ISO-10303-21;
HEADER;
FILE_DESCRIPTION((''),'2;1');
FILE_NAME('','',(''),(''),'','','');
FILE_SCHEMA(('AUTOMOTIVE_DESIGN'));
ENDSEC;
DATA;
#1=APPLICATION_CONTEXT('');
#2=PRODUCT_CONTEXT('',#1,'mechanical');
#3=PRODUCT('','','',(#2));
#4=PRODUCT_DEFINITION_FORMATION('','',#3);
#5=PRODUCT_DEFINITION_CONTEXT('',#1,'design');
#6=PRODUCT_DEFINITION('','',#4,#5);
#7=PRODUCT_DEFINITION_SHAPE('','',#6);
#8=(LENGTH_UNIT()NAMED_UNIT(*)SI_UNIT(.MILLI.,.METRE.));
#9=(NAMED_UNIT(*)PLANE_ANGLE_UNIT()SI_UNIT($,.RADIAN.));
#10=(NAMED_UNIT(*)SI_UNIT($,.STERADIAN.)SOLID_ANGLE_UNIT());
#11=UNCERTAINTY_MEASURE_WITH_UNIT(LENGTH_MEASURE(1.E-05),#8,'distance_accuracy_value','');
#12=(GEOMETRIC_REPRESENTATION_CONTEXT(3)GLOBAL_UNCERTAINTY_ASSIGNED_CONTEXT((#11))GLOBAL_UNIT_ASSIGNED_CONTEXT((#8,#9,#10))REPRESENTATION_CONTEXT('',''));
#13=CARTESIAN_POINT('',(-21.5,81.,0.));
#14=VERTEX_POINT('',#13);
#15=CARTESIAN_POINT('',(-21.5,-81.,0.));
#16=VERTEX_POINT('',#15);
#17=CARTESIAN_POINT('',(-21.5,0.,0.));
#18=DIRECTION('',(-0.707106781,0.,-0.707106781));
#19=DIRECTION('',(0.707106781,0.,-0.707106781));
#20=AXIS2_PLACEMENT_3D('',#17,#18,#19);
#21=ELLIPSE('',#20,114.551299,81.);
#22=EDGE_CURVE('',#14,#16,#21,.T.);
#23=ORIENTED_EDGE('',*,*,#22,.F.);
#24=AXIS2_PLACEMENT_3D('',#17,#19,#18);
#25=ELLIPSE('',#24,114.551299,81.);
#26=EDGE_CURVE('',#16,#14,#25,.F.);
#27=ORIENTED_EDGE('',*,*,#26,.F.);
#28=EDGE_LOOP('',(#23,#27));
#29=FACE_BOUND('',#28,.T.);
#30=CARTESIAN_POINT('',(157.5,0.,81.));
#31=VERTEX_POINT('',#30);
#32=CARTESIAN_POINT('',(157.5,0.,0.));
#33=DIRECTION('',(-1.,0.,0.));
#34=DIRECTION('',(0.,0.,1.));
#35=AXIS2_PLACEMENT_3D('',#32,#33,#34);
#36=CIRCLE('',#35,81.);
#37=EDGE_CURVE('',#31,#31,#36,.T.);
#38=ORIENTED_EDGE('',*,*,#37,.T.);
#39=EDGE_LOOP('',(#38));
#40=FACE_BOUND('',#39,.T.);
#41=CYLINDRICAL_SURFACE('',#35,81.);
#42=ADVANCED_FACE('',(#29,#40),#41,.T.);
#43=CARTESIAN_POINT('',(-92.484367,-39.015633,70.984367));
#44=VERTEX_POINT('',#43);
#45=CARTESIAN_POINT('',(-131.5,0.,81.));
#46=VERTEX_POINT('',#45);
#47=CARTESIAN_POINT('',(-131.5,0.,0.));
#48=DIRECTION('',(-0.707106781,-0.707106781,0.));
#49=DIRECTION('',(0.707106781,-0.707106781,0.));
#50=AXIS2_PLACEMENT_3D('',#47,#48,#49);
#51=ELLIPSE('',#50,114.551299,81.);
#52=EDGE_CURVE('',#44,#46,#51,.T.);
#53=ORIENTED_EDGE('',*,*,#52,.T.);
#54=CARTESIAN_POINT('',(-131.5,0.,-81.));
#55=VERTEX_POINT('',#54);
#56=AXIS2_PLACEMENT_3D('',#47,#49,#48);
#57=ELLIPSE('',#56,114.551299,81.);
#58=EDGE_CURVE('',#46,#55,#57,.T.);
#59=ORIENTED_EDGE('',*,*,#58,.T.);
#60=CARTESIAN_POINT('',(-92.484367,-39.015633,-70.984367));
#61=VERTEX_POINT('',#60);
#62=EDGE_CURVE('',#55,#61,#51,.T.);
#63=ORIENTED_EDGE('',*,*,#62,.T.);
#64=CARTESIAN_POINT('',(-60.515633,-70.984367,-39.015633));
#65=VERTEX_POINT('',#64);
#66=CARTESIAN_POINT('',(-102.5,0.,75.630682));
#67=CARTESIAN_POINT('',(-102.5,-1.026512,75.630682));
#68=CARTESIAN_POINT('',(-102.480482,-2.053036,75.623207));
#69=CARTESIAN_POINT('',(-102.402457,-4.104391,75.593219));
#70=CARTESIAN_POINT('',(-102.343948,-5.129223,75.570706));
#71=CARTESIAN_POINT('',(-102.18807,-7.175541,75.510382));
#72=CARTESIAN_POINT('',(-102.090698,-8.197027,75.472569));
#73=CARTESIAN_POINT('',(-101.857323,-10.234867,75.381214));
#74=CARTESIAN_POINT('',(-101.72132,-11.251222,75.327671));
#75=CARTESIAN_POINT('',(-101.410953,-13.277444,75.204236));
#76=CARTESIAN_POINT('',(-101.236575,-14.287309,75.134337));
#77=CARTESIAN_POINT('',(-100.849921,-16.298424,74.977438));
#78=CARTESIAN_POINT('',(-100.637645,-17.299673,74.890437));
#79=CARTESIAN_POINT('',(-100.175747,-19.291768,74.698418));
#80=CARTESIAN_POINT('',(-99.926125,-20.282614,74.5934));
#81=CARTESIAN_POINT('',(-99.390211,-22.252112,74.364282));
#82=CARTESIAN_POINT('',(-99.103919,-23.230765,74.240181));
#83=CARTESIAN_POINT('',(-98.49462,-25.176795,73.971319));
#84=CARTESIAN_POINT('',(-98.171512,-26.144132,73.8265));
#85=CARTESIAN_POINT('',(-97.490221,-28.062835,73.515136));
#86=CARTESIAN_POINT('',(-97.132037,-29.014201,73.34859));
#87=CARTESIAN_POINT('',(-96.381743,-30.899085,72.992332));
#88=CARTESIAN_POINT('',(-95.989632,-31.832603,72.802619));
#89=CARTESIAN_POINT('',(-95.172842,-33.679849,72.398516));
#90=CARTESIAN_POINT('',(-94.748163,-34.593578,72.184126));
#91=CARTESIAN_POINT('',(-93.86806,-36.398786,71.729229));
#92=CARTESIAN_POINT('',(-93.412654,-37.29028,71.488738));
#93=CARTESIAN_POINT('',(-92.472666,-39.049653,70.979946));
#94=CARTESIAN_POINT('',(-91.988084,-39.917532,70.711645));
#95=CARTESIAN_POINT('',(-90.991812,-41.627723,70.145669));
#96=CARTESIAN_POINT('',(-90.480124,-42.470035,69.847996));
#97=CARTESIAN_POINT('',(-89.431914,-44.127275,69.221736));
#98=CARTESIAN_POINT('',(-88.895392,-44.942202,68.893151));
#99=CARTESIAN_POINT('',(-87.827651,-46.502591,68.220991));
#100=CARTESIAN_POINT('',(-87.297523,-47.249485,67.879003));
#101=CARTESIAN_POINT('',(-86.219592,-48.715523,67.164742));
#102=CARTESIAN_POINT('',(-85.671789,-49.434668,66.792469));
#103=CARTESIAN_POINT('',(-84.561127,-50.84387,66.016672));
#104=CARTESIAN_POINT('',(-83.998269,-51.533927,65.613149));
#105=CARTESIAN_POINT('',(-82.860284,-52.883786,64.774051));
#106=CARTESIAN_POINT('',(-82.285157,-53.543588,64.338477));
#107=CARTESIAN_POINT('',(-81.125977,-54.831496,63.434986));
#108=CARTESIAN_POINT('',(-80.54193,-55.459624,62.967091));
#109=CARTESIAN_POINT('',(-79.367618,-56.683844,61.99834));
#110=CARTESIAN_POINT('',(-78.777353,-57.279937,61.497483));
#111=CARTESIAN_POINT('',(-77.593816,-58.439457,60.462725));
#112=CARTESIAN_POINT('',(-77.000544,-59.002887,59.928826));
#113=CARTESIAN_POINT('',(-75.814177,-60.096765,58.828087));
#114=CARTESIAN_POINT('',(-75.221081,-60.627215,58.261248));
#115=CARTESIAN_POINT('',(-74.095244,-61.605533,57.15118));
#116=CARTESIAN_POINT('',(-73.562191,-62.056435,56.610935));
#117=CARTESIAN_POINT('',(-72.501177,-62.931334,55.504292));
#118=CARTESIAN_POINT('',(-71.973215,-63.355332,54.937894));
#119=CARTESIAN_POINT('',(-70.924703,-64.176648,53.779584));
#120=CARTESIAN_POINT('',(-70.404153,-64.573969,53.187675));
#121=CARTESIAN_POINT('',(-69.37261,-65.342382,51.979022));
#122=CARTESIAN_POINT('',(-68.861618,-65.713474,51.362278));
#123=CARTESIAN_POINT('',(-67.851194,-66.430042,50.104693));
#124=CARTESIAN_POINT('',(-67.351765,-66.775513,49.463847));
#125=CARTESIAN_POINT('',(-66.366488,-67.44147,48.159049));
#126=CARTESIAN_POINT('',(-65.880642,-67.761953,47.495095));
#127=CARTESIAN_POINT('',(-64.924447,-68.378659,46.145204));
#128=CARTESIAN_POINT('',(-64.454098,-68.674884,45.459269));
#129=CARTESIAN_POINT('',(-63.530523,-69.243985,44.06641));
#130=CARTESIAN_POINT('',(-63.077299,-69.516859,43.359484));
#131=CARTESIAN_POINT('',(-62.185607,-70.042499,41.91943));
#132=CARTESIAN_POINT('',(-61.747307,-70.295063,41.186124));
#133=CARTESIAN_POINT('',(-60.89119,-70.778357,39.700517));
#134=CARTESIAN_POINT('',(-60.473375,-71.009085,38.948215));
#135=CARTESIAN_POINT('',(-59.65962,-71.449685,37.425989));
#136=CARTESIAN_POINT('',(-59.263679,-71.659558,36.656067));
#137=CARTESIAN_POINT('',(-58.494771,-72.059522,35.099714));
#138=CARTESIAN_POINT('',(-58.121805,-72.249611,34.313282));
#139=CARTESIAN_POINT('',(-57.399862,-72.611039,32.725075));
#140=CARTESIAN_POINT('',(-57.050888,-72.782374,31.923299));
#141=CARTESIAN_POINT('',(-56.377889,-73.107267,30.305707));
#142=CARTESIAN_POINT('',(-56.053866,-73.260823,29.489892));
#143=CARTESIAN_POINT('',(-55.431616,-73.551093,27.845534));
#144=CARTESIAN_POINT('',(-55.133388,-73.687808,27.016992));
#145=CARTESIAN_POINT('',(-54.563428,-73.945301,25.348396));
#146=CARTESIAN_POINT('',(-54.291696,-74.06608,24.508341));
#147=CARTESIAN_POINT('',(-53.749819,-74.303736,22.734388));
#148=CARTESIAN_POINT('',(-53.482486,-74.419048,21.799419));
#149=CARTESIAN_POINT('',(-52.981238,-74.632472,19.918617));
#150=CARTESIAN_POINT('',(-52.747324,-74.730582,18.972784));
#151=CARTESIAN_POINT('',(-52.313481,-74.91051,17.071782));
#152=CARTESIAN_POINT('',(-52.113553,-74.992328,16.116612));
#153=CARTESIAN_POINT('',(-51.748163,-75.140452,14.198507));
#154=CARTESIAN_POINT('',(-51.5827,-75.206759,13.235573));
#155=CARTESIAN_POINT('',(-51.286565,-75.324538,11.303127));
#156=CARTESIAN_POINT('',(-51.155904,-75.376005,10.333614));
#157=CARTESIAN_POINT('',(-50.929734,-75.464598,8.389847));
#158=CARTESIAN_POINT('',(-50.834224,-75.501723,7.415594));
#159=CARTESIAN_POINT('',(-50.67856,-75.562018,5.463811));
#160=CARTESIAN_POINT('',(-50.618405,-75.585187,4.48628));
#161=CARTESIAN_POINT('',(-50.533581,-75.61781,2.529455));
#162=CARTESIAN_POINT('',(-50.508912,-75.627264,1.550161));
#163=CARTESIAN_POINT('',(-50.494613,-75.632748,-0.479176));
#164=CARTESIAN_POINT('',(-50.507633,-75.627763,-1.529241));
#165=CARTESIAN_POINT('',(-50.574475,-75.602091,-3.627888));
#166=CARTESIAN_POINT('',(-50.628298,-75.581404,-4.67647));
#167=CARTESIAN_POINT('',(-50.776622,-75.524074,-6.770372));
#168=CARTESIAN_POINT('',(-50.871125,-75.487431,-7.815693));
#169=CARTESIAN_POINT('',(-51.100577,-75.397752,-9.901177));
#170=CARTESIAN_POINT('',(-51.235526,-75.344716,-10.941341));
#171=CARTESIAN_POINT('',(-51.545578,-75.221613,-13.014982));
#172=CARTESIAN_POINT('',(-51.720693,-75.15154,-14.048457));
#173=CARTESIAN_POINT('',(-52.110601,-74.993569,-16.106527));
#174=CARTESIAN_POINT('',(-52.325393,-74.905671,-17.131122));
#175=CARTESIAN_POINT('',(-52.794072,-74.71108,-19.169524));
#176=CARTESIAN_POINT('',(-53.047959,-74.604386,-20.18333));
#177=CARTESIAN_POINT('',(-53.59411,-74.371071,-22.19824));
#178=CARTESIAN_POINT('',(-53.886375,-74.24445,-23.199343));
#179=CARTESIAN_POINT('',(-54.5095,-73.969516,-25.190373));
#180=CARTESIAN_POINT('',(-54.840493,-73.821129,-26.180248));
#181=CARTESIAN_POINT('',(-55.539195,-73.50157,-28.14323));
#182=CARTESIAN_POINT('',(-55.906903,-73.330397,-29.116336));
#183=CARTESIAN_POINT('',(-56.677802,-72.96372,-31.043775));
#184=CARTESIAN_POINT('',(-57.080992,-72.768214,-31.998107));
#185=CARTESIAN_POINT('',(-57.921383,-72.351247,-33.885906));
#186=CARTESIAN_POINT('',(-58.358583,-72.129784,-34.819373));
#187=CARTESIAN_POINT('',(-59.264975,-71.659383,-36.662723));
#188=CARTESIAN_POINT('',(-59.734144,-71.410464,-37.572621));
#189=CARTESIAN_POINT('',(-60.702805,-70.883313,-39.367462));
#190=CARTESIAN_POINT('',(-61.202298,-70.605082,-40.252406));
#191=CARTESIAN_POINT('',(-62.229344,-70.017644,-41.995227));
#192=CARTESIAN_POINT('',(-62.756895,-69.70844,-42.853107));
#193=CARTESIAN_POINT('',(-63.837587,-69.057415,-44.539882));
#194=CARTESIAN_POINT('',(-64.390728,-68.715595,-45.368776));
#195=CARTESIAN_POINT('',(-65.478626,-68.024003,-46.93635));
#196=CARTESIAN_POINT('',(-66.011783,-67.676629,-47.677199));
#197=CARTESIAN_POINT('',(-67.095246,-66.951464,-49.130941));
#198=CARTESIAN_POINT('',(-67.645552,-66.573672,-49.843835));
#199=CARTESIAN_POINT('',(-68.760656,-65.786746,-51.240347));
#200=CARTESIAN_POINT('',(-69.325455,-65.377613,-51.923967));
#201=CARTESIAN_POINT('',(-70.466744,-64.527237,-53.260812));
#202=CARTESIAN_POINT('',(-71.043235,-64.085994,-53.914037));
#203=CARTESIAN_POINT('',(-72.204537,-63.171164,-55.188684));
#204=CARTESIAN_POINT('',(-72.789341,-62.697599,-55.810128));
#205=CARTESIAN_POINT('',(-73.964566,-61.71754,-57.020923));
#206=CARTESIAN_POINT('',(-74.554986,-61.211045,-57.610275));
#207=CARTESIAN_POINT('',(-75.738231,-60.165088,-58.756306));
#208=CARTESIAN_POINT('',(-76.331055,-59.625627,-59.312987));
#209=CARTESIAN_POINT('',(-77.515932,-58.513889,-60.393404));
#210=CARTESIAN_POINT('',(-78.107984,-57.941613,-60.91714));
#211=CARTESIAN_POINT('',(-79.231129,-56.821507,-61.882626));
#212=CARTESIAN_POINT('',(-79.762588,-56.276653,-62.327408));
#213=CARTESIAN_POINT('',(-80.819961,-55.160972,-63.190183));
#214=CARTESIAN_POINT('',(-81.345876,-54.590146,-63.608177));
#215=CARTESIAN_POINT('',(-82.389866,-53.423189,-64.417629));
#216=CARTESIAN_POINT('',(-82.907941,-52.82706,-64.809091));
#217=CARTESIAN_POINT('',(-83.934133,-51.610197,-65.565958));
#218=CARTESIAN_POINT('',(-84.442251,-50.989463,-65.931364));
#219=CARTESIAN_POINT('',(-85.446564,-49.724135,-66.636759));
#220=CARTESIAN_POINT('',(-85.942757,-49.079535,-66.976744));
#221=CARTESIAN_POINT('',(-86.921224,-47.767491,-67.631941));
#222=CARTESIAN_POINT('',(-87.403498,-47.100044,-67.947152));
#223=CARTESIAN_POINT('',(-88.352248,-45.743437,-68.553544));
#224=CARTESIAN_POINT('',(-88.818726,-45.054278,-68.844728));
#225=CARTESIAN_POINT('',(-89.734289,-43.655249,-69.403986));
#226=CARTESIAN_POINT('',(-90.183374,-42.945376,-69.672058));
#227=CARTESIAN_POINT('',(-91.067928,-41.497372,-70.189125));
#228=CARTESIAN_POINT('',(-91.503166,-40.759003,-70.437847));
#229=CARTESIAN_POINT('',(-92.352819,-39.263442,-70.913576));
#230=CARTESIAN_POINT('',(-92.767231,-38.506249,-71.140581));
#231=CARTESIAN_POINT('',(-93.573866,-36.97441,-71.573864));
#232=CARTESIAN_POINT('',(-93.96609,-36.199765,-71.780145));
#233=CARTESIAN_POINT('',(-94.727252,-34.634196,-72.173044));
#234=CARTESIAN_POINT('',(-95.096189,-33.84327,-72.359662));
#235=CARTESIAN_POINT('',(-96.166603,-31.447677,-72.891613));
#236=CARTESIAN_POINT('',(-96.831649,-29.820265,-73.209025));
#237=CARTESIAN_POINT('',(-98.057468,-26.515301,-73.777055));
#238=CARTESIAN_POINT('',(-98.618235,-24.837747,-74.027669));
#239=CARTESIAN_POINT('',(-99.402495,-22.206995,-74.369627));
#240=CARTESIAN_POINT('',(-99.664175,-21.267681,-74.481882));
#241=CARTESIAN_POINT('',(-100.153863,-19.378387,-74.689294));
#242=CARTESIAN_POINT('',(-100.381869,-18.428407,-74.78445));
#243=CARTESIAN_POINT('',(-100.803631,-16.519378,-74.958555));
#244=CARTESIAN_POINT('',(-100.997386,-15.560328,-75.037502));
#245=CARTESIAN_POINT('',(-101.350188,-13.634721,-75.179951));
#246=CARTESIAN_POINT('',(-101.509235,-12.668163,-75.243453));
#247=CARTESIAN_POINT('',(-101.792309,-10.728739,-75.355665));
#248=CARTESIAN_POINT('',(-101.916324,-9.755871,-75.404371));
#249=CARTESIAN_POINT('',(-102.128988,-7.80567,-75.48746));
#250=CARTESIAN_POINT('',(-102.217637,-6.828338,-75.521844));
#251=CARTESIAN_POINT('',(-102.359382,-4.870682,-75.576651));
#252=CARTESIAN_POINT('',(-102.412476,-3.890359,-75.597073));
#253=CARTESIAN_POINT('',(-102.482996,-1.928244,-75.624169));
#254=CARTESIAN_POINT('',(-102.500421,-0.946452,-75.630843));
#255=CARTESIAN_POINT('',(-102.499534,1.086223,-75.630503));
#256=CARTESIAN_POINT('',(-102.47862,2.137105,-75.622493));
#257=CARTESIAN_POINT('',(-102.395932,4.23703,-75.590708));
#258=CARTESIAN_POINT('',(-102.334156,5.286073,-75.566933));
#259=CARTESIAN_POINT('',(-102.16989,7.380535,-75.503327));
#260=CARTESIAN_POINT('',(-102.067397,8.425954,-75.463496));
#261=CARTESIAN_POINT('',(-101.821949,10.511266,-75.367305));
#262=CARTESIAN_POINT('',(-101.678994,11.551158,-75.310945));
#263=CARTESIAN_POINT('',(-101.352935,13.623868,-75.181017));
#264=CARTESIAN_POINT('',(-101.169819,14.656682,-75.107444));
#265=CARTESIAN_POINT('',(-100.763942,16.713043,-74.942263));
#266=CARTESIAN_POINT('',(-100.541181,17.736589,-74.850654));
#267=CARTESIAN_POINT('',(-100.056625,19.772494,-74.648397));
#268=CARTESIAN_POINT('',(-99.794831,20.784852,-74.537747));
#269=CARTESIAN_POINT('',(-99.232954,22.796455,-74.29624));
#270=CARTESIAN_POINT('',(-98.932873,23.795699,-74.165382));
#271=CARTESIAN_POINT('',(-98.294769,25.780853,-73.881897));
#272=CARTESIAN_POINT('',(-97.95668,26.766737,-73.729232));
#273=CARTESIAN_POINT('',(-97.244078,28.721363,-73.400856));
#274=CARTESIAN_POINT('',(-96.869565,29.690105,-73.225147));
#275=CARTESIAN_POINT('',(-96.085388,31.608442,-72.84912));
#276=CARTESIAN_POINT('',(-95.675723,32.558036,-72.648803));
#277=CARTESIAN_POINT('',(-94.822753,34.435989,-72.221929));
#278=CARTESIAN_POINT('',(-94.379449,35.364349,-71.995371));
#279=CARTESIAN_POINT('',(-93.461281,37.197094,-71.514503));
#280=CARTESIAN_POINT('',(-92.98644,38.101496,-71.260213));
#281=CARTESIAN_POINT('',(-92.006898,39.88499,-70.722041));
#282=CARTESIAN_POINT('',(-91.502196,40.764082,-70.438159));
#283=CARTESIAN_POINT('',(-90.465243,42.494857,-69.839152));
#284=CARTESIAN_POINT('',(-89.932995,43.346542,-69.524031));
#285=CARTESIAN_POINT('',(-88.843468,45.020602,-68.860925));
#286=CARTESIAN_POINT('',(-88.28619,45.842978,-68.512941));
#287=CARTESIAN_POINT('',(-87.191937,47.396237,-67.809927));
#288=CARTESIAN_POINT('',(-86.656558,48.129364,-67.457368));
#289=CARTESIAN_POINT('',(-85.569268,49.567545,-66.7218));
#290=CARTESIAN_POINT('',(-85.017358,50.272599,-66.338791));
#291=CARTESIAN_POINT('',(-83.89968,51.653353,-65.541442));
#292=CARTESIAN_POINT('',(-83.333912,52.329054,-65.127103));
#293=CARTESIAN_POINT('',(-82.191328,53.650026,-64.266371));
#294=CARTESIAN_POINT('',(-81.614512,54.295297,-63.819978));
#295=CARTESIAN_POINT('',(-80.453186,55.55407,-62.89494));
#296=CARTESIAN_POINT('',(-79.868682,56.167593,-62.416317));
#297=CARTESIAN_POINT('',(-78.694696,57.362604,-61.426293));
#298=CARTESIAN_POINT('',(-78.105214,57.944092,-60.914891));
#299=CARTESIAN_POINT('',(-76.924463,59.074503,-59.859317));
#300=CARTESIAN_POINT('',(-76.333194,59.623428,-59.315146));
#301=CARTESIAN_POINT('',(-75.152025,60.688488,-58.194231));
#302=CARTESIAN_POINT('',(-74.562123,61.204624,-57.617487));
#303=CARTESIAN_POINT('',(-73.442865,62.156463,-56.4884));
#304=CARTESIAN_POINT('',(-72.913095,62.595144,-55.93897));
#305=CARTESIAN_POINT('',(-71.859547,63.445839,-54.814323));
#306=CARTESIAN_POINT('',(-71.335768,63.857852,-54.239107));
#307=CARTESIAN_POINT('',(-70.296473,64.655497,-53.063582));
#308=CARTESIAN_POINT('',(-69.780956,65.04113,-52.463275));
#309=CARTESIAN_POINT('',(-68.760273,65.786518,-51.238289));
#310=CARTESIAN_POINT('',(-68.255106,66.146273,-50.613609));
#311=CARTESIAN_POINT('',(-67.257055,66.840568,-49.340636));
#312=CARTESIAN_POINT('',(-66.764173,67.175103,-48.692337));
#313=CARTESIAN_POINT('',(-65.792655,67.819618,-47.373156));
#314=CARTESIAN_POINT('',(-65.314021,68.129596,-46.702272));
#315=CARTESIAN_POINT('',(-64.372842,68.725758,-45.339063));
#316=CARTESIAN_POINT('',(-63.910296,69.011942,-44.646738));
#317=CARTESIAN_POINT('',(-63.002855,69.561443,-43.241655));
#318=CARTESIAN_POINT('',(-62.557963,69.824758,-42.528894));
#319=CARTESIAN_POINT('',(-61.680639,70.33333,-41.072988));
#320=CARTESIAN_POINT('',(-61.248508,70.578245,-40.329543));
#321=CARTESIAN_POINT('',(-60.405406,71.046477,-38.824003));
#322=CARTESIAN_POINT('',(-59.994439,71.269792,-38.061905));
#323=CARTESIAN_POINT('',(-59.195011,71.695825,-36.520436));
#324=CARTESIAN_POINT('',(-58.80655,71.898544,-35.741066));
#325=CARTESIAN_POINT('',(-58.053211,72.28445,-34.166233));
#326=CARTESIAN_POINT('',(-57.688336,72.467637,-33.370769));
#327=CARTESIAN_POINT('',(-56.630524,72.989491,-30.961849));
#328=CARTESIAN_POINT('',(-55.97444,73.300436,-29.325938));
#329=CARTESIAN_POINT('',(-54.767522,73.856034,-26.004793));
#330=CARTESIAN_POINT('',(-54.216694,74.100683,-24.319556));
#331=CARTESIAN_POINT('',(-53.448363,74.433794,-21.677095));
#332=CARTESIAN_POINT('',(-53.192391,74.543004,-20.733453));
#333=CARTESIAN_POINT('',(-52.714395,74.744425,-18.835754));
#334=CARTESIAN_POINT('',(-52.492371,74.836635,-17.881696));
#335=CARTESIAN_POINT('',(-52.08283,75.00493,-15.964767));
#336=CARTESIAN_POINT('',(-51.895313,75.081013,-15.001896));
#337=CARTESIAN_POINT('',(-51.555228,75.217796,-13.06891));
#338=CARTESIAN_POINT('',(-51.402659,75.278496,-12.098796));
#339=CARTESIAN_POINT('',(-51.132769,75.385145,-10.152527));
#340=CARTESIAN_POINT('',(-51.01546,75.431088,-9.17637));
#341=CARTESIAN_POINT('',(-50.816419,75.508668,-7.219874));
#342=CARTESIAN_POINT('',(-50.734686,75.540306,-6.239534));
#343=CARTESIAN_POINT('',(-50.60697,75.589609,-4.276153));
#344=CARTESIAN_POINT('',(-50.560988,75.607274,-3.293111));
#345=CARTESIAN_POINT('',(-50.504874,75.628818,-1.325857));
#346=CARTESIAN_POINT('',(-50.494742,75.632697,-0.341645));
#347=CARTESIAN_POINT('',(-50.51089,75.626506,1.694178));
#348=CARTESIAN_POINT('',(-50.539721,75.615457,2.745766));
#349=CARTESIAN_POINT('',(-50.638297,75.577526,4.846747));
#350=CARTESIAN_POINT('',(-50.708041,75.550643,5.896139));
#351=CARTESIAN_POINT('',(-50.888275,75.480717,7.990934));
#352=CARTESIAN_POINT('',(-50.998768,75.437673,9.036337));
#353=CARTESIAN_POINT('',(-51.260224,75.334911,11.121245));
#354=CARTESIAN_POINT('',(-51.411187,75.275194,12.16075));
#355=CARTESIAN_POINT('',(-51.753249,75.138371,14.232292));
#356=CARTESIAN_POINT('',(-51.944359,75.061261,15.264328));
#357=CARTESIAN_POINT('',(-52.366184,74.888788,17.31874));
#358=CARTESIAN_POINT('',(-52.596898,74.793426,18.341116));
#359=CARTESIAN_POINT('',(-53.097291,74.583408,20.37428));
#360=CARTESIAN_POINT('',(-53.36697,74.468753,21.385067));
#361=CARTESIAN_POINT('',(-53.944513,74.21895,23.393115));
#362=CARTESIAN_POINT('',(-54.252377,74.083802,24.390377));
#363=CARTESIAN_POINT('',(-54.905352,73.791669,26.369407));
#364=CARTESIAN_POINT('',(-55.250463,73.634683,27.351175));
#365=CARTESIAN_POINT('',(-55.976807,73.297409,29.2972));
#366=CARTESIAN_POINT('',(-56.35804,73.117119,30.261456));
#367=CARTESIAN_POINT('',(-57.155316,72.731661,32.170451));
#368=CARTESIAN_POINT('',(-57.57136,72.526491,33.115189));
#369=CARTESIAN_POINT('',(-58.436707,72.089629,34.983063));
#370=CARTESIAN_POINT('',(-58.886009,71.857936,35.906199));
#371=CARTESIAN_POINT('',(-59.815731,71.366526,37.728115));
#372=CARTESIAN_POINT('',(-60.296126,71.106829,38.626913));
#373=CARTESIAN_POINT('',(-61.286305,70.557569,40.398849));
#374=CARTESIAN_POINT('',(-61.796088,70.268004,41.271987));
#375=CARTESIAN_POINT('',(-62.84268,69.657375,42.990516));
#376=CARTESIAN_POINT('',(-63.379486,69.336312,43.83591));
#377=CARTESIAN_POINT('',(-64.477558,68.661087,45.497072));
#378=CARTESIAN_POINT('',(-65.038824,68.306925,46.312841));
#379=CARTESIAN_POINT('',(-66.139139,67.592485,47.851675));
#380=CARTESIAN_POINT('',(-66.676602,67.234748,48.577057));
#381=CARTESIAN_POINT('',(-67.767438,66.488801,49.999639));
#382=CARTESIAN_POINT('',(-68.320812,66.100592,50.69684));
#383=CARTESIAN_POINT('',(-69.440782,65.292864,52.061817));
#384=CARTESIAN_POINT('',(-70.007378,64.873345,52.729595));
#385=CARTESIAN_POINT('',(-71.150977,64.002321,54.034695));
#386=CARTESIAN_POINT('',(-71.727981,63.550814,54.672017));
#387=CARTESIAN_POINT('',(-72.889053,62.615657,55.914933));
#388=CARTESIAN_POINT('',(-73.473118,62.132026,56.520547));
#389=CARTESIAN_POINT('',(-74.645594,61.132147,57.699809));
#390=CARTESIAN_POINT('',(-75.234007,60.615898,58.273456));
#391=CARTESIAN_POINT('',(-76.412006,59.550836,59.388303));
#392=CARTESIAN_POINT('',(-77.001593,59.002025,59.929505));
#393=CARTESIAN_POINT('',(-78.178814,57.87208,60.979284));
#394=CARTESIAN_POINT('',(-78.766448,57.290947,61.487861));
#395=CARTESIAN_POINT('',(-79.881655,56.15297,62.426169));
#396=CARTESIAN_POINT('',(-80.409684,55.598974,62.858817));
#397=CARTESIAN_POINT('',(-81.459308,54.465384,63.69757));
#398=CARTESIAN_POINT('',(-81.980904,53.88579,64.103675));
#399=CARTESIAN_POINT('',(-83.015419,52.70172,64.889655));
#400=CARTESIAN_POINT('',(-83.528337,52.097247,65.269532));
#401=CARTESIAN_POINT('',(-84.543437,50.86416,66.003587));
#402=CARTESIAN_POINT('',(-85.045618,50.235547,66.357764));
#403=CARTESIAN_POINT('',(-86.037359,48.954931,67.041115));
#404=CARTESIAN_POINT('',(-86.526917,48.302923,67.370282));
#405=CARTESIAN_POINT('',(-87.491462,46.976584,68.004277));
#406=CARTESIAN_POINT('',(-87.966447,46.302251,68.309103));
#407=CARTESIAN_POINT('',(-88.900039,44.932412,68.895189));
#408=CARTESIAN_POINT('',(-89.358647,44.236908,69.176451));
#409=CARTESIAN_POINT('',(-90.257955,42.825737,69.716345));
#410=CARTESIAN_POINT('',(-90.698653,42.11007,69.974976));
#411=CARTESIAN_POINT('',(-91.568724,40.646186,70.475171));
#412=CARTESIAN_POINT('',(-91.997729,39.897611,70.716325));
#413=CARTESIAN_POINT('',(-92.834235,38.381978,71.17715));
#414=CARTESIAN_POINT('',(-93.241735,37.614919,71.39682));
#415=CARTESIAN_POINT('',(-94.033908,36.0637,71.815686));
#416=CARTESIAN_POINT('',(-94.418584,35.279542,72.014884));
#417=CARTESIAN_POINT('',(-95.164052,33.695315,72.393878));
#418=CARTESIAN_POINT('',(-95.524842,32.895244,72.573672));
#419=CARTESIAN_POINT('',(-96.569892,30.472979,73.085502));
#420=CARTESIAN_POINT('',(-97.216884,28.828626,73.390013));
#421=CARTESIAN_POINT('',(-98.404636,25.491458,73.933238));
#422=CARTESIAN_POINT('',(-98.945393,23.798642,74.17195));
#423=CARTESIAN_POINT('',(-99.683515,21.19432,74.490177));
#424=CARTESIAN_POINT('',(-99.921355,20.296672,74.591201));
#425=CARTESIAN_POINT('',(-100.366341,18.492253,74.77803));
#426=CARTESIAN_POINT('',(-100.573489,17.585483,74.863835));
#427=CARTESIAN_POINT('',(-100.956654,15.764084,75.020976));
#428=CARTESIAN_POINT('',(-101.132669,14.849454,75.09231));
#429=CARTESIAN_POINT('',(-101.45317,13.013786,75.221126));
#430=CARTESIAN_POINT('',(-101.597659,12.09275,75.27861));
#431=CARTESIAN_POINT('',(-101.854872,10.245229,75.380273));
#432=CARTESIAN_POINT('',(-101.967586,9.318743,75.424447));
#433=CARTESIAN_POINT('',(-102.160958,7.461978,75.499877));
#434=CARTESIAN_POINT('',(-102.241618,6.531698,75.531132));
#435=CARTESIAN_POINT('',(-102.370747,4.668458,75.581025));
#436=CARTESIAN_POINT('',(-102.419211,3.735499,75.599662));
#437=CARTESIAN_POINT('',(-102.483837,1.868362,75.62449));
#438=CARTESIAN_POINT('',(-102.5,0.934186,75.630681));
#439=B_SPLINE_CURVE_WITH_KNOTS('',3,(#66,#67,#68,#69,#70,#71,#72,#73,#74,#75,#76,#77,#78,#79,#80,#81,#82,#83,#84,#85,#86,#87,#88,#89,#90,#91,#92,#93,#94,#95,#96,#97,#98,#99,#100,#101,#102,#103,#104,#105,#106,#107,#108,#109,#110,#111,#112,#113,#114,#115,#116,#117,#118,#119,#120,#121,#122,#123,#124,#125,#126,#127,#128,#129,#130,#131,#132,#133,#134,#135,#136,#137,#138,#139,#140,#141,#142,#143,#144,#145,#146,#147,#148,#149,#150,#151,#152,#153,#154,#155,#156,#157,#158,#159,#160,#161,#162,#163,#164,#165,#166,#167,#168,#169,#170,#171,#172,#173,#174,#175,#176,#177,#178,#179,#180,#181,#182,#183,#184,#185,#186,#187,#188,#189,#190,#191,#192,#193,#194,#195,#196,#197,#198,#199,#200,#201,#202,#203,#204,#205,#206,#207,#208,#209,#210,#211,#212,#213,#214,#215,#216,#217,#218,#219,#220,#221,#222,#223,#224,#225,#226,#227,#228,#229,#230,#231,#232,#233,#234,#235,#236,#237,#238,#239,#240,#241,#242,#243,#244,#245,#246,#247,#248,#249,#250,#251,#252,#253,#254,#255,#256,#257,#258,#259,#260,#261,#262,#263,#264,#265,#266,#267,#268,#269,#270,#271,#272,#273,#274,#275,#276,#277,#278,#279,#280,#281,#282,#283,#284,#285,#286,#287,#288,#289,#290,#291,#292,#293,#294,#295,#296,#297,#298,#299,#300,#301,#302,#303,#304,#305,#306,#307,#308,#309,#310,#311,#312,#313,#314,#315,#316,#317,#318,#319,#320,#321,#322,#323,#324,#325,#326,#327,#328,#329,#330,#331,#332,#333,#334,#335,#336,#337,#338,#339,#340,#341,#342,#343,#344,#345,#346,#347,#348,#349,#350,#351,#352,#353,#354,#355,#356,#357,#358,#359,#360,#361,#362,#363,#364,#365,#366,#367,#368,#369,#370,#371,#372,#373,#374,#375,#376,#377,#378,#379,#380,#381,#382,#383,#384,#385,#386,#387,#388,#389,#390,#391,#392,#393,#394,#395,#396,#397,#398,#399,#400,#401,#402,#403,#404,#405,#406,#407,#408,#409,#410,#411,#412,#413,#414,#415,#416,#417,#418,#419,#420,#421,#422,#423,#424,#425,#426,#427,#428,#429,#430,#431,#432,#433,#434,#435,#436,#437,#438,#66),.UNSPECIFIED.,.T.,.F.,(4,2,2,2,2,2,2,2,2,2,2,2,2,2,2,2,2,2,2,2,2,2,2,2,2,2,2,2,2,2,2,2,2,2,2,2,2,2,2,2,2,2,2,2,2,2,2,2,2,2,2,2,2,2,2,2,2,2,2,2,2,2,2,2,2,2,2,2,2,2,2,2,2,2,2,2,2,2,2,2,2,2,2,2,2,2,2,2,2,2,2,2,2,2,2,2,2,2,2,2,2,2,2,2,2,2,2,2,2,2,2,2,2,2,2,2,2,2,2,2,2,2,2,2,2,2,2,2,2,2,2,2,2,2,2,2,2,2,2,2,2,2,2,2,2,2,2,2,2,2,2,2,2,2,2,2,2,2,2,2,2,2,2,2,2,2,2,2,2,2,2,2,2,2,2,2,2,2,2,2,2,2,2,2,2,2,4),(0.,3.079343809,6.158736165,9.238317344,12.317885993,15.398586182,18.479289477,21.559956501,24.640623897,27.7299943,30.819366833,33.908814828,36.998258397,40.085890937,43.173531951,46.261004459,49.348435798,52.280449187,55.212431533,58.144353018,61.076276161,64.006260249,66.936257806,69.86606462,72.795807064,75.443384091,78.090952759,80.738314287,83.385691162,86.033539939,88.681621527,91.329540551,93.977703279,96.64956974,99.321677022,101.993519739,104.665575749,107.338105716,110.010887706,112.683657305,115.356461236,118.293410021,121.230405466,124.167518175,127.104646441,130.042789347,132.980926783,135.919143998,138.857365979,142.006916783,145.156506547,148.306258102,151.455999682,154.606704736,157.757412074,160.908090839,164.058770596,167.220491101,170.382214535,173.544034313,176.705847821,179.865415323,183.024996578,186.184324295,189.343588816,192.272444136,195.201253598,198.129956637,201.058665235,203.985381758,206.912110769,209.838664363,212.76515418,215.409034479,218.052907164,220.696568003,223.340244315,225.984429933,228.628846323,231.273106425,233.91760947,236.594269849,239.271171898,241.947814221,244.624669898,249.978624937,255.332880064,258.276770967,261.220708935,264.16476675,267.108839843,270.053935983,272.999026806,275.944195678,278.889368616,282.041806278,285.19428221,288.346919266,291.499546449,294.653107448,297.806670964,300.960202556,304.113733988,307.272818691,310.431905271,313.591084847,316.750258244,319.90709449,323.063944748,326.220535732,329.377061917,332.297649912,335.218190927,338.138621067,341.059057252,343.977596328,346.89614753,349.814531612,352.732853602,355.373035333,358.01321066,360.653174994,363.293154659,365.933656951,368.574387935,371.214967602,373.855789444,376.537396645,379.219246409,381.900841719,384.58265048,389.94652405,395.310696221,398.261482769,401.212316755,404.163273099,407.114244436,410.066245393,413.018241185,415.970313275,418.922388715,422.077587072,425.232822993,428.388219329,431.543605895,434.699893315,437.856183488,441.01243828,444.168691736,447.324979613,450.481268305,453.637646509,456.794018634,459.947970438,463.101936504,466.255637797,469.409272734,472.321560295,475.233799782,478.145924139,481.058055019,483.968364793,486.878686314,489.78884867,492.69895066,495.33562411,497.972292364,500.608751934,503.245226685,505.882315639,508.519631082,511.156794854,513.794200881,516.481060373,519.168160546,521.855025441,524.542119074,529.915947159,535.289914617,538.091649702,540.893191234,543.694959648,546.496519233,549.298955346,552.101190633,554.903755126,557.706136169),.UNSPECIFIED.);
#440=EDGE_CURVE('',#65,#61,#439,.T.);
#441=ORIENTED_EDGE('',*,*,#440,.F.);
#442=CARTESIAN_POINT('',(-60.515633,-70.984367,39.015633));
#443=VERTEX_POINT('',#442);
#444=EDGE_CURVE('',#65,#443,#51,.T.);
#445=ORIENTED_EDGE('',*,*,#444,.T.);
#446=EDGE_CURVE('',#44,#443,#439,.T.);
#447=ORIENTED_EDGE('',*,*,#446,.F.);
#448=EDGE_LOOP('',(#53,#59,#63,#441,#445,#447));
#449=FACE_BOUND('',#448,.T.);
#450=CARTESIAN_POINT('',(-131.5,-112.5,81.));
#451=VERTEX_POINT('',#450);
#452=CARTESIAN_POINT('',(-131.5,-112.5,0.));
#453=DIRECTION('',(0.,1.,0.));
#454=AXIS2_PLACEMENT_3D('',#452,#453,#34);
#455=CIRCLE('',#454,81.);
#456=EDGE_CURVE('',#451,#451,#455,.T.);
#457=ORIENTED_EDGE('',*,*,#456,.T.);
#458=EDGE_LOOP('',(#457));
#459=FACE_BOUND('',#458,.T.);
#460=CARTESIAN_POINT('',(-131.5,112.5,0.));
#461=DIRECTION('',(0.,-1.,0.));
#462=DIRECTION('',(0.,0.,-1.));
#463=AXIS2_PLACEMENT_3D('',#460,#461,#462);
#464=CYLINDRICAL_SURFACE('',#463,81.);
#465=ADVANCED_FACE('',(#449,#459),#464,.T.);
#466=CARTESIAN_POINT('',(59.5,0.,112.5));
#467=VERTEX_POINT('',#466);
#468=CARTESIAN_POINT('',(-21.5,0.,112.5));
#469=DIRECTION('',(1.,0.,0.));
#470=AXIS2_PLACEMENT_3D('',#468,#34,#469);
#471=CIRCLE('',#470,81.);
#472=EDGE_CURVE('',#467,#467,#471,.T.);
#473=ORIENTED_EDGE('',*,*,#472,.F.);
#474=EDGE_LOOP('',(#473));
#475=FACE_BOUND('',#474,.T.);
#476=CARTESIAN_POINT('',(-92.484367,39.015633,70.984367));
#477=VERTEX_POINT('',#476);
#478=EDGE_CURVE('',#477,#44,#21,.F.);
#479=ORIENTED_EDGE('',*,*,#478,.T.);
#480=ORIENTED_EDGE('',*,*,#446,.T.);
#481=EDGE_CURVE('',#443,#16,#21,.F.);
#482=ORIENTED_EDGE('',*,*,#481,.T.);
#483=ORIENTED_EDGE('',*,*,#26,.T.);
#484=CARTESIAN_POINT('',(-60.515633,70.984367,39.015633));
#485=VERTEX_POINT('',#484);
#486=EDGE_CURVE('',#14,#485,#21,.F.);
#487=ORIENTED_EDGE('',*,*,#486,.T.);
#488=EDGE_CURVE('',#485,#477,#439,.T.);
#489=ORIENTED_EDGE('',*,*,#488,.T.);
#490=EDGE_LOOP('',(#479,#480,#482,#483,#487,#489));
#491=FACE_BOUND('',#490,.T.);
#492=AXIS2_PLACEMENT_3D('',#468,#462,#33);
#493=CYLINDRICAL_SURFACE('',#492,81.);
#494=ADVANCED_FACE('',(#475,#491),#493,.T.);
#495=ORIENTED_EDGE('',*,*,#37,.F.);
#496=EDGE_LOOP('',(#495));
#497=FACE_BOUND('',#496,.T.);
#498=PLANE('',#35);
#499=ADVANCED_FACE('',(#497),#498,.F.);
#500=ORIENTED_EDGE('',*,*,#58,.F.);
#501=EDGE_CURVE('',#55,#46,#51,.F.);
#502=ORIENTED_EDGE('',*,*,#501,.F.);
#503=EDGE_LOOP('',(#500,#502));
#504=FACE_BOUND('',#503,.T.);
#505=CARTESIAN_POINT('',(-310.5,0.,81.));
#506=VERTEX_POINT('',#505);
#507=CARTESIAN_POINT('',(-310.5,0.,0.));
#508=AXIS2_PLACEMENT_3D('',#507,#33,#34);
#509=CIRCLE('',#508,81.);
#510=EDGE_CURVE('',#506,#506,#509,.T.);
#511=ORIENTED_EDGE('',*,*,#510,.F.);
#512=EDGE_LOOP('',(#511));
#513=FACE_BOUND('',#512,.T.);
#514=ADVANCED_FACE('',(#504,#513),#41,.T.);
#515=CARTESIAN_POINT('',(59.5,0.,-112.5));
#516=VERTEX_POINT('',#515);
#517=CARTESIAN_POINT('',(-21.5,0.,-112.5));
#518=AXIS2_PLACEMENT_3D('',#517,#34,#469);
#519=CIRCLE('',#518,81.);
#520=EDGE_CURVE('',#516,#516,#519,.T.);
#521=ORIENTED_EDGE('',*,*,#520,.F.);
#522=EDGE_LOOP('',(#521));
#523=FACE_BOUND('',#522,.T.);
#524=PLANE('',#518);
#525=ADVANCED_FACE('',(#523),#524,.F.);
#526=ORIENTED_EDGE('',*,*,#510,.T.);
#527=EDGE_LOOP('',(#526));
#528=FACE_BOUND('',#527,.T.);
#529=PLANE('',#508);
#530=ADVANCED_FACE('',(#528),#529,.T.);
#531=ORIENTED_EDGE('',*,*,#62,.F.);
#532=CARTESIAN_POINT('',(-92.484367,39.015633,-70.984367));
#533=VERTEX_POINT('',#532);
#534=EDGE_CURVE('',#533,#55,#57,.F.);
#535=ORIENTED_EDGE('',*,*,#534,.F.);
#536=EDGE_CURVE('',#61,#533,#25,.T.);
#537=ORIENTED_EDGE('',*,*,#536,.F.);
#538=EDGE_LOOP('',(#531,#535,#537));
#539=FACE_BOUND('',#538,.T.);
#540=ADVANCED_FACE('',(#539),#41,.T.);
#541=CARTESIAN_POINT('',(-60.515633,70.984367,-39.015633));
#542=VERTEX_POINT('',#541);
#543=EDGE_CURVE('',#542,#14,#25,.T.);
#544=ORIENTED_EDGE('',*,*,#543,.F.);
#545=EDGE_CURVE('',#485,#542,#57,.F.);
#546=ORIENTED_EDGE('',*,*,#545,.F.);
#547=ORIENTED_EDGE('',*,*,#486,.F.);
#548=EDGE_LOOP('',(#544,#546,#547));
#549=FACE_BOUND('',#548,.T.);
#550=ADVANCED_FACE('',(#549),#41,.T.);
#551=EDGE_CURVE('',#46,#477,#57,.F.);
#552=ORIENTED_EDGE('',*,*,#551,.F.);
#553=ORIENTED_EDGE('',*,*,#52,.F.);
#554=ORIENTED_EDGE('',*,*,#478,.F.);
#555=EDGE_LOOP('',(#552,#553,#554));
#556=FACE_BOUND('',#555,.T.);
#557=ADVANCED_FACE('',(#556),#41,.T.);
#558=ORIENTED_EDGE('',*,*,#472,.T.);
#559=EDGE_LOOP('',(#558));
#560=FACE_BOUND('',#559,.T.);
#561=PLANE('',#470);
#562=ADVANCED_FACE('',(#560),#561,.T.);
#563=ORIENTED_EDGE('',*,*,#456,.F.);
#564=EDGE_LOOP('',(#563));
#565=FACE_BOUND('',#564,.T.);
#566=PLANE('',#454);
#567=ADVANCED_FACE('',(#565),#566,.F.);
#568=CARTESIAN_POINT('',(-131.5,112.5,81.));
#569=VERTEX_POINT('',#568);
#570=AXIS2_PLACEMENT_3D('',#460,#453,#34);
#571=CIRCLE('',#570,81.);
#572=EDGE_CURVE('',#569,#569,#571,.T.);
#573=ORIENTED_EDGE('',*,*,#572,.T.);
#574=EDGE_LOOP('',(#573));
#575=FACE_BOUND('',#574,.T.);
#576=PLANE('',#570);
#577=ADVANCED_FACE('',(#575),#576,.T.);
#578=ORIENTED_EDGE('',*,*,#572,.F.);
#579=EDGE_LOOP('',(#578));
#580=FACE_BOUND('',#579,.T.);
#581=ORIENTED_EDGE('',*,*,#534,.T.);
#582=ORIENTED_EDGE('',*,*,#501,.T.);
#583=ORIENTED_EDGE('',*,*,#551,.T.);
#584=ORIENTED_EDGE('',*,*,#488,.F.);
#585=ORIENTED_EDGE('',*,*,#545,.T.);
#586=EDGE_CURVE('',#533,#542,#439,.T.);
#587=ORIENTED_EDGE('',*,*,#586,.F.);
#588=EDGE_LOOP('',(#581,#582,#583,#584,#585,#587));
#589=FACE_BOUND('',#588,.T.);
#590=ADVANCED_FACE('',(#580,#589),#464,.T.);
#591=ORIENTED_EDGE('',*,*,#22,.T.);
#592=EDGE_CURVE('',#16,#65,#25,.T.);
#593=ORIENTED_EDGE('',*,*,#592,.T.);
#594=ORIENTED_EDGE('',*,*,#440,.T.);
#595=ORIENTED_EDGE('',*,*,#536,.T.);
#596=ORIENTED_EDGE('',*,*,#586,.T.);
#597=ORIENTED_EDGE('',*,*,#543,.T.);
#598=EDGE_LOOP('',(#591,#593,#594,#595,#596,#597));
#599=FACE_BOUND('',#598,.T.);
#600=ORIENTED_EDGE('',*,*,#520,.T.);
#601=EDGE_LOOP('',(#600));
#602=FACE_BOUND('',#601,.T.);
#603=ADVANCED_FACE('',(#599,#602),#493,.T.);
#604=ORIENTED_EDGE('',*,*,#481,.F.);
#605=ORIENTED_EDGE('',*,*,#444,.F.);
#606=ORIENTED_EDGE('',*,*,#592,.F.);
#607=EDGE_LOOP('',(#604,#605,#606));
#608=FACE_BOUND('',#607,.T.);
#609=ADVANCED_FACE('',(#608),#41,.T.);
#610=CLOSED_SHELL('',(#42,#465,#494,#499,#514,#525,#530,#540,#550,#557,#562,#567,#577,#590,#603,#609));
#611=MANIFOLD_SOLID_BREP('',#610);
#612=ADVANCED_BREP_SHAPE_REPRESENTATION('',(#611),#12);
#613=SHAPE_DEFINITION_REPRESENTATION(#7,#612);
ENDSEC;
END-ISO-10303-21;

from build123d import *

# Parameters (mm, degrees)
CROQUIS2_R              = 81
SALIENTE_EXTRUIR1_DEPTH = 112.5
CROQUIS3_R              = 81
SALIENTE_EXTRUIR2_DEPTH = 112.5
CROQUIS3D7_R            = 81
SALIENTE_EXTRUIR3_DEPTH = 468


with BuildPart() as part:
    # Croquis2 → Saliente-Extruir1 (new, symmetric)
    with BuildSketch(Plane(origin=(0, 0, 0), x_dir=(1, 0, 0), z_dir=(0, 1, 0))):
        with Locations((-131.5, 0)):
            Circle(CROQUIS2_R)
    extrude(amount=SALIENTE_EXTRUIR1_DEPTH, both=True)

    # Croquis3 → Saliente-Extruir2 (add, symmetric)
    with BuildSketch(Plane.XY):
        with Locations((-21.5, 0)):
            Circle(CROQUIS3_R)
    extrude(amount=SALIENTE_EXTRUIR2_DEPTH, both=True)

    # Croquis3D7 → Saliente-Extruir3 (add)
    with BuildSketch(Plane(origin=(157.5, 0, 0), x_dir=(0, 0, 1), z_dir=(1, 0, 0))):
        Circle(CROQUIS3D7_R)
    extrude(amount=-SALIENTE_EXTRUIR3_DEPTH)


solid = part.part
